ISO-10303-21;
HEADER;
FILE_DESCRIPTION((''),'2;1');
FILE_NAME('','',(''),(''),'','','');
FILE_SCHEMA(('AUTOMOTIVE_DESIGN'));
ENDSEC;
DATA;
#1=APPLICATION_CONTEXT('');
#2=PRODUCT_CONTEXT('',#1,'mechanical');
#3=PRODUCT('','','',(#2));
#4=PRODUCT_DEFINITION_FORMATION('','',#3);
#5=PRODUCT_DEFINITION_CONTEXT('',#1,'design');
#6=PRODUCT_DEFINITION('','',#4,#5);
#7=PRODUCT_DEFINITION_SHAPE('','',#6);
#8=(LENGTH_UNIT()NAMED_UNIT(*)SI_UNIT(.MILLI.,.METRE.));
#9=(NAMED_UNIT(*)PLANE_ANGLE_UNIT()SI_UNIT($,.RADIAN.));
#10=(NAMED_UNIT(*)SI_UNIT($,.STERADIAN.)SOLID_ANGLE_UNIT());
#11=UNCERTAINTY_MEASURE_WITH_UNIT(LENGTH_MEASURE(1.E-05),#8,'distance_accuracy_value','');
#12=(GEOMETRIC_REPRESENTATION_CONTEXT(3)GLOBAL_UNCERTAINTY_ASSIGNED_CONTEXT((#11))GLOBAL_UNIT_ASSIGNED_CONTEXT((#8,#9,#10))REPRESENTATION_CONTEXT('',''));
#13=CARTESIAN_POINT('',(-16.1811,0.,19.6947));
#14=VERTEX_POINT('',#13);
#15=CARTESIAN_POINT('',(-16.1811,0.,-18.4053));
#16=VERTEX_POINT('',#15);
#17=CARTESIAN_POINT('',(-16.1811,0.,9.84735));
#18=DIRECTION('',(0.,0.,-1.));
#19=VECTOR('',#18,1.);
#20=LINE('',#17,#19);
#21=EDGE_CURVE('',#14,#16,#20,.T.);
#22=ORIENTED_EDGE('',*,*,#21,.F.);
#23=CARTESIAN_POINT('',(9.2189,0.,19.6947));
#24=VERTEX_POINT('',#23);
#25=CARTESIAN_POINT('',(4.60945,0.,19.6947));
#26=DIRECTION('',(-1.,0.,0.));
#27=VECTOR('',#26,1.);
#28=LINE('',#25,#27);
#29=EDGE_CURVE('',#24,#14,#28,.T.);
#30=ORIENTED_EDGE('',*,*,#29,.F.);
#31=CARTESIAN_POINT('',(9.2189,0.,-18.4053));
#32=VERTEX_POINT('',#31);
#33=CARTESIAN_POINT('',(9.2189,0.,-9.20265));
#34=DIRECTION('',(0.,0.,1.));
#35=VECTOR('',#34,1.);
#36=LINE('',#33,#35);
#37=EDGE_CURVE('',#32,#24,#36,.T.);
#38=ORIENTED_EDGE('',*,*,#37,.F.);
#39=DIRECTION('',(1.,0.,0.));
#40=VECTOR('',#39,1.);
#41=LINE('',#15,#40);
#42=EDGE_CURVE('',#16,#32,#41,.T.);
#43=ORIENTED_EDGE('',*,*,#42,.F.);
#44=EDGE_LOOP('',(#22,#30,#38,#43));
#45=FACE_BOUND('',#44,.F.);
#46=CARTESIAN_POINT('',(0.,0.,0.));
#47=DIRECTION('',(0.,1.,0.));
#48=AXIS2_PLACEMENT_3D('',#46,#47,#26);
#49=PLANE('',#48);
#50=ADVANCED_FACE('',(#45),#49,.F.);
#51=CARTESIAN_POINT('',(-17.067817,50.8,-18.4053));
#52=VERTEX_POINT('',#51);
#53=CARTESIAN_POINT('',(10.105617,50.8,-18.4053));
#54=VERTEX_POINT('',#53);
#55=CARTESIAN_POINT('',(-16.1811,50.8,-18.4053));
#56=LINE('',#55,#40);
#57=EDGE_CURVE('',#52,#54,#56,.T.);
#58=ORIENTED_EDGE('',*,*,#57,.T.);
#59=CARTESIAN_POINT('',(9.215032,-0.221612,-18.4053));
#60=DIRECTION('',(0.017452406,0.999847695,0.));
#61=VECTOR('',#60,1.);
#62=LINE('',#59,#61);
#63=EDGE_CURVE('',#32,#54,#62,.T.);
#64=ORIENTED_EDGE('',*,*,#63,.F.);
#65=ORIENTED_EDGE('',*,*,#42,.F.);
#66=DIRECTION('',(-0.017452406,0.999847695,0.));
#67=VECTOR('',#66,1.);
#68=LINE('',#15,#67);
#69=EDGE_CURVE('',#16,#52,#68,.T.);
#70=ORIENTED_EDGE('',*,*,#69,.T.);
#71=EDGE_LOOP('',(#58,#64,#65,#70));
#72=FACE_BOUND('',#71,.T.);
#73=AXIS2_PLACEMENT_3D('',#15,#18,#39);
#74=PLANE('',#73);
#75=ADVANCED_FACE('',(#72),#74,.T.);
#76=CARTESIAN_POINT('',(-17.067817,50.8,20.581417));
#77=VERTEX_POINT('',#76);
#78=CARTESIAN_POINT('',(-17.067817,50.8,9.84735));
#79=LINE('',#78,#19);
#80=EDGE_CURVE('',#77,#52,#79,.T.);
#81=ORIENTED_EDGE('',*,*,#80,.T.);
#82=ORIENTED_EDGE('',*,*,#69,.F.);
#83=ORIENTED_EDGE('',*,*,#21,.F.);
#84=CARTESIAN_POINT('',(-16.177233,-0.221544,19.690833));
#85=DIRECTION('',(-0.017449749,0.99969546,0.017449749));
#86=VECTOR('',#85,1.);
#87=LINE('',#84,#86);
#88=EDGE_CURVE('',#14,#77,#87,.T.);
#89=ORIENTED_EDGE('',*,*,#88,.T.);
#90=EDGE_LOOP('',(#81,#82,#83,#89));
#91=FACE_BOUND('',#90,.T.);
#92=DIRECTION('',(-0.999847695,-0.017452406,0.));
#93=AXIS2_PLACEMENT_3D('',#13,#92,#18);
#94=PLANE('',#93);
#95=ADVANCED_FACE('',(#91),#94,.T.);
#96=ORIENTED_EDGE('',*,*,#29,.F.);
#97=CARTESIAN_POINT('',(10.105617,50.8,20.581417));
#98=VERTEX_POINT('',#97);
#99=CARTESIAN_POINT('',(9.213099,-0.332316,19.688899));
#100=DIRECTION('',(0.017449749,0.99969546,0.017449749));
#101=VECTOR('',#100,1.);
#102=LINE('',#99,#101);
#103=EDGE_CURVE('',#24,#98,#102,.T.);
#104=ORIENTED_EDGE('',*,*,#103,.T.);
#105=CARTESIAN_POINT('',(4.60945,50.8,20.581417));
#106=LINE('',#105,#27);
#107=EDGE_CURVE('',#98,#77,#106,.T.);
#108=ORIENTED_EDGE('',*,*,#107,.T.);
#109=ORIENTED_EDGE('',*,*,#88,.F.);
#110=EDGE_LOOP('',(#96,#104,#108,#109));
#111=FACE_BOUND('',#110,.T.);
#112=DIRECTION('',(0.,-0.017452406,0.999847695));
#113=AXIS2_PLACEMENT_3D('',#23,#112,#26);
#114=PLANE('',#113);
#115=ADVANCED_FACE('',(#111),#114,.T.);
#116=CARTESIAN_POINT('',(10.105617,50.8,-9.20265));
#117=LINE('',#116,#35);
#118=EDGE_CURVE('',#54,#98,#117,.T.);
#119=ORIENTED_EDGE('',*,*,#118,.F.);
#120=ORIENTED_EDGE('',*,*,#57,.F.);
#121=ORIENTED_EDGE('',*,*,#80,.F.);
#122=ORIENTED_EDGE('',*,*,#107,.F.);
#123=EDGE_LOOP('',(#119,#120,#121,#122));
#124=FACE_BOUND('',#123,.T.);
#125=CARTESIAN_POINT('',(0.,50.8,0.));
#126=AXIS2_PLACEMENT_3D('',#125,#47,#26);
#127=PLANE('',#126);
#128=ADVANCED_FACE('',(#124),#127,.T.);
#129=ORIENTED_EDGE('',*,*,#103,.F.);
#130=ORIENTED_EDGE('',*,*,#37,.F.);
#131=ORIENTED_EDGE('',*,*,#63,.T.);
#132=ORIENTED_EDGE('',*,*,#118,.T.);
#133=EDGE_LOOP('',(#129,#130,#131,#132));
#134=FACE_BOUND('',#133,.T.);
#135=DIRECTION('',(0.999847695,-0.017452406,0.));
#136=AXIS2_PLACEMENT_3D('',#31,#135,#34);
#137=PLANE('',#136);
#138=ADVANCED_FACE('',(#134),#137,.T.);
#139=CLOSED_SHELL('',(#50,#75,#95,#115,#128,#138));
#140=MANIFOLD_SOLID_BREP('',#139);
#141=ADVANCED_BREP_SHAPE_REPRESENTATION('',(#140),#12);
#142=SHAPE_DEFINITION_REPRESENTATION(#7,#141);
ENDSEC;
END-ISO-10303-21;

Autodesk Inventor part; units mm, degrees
ref_plane "YZ Plane" through (0, 0, 0) normal (1, 0, 0) x (0, 1, 0)
ref_plane "XZ Plane" through (0, 0, 0) normal (0, 1, 0) x (-1, 0, 0)
ref_plane "XY Plane" through (0, 0, 0) normal (0, 0, 1) x (1, 0, 0)
sketch "Sketch1" plane through (0, 0, 0) normal (0, 1, 0) x (-1, 0, 0)
  circle A0 centre (3.4811, 6.9947) radius 6.35
  line L0 (-9.2189, 19.6947) -> (16.1811, 19.6947)
  line L1 (16.1811, 19.6947) -> (16.1811, -18.4053)
  line L2 (16.1811, -18.4053) -> (-9.2189, -18.4053)
  line L3 (-9.2189, -18.4053) -> (-9.2189, 19.6947)
  point P0 (0, 0)
  dimension "d0" = 12.7
  dimension "d1" = 25.4
  dimension "d2" = 38.1
  dimension "d3" = 12.7
  dimension "d4" = 12.7
extrude "Extrusion1" add sketch "Sketch1" along normal blind 50.8 contours A0 | L0 L1 L2 L3
draft "FaceDraft1" angle 1 pull direction (0, -1, 0) faces at (9.2189, 16.9333, 6.9947) (-16.1811, 16.9333, -5.7053) (-7.7145, 33.8667, 19.6947) fixed edges at (9.2189, 0, 0.6447) (-16.1811, 0, 0.6447) (-3.4811, 0, 19.6947)
properties part number "Cylinder Cast Image Alt"
